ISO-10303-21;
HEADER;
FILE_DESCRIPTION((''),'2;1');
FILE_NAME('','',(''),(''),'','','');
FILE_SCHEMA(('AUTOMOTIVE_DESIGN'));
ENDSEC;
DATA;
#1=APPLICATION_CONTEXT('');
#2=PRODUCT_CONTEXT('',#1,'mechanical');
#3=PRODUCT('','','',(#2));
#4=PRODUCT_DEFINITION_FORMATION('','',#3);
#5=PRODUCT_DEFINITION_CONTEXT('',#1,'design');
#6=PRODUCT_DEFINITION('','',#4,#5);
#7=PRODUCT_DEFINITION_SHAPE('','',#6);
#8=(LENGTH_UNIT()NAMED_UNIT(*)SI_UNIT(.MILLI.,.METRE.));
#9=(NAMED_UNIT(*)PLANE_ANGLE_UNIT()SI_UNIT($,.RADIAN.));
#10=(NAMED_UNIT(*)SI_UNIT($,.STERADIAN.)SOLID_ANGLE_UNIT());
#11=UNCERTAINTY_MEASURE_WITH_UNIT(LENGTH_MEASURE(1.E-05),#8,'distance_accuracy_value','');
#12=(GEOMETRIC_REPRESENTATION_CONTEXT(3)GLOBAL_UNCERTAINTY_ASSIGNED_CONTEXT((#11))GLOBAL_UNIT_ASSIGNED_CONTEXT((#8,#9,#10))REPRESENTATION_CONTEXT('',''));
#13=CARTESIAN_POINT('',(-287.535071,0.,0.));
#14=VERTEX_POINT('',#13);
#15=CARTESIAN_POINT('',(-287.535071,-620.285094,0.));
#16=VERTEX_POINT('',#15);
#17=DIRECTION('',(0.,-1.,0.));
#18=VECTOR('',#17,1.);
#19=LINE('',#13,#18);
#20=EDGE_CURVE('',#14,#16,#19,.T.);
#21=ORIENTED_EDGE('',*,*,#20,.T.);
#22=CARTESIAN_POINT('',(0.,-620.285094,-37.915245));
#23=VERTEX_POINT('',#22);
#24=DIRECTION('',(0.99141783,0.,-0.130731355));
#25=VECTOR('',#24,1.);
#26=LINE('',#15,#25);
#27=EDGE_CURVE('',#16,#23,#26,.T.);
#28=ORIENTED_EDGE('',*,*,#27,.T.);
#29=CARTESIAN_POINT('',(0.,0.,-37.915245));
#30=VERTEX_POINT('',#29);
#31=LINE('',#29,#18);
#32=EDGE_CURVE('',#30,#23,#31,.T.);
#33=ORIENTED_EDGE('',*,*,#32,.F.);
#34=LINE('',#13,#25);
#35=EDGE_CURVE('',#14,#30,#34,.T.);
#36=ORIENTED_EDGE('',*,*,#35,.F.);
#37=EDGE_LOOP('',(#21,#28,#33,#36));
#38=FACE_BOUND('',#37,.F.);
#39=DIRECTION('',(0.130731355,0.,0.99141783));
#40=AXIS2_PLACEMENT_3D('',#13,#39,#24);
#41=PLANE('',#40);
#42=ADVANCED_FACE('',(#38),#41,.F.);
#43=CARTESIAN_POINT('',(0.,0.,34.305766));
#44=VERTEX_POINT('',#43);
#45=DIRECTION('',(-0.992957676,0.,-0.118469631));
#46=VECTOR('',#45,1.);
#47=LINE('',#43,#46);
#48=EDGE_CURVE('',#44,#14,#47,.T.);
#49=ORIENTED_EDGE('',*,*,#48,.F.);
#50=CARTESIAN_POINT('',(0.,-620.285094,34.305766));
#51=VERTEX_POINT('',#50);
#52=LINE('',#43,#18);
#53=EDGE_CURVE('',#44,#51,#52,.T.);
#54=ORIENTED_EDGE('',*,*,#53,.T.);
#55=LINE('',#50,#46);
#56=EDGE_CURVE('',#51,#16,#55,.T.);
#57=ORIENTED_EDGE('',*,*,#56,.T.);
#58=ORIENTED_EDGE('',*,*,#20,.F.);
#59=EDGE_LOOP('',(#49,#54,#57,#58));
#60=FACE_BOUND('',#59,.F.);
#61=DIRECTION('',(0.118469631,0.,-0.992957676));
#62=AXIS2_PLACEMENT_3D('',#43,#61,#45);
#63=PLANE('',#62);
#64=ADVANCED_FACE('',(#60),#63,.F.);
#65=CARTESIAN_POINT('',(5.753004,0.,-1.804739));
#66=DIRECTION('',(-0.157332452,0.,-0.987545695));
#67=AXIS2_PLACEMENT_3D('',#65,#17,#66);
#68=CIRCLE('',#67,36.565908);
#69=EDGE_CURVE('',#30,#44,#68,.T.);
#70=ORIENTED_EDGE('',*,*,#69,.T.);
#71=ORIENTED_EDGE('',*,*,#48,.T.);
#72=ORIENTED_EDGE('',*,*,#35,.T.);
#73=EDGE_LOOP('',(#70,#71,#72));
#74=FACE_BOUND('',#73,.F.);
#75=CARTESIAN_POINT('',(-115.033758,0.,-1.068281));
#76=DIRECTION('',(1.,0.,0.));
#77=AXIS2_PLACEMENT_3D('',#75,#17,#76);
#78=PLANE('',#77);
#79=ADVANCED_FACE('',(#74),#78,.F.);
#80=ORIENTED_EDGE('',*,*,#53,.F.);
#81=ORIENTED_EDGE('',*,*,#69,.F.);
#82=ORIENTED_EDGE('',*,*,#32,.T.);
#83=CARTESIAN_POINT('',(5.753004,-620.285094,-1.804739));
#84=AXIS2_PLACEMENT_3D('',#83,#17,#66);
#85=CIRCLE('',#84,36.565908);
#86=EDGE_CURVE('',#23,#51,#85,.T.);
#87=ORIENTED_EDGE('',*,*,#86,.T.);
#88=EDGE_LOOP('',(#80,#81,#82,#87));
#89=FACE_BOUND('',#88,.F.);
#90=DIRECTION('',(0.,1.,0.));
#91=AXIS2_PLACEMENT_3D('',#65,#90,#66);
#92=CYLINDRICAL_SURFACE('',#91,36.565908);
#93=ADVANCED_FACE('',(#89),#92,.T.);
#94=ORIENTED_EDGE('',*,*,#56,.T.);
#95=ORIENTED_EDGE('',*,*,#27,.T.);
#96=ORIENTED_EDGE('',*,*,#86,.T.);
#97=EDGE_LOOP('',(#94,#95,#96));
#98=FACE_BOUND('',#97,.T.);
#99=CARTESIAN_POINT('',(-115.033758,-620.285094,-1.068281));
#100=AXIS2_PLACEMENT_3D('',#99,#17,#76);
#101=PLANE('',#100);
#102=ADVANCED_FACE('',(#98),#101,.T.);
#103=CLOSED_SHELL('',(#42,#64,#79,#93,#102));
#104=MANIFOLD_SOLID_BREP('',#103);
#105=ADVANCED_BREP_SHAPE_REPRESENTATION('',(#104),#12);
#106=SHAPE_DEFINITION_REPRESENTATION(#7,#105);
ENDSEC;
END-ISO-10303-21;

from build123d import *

# Parameters (mm, degrees)
F1_DEPTH = 620.2850937843


# Not quite as in the source:
# - the program builds the solid bodies; features that only make, move or delete a surface that nothing else refers to are left out


with BuildPart() as f1:
    # F0 (on Front) → F1 (new body)
    with BuildSketch(Plane.XZ):
        with BuildLine():
            Line((-287.535071373, 0), (0, -37.9152446985))
            ThreePointArc((0, -37.9152446985), (42.3189124943, -1.8047392368), (0, 34.3057662249))
            Line((0, 34.3057662249), (-287.535071373, 0))
        make_face()
    extrude(amount=F1_DEPTH)


solid = f1.part
